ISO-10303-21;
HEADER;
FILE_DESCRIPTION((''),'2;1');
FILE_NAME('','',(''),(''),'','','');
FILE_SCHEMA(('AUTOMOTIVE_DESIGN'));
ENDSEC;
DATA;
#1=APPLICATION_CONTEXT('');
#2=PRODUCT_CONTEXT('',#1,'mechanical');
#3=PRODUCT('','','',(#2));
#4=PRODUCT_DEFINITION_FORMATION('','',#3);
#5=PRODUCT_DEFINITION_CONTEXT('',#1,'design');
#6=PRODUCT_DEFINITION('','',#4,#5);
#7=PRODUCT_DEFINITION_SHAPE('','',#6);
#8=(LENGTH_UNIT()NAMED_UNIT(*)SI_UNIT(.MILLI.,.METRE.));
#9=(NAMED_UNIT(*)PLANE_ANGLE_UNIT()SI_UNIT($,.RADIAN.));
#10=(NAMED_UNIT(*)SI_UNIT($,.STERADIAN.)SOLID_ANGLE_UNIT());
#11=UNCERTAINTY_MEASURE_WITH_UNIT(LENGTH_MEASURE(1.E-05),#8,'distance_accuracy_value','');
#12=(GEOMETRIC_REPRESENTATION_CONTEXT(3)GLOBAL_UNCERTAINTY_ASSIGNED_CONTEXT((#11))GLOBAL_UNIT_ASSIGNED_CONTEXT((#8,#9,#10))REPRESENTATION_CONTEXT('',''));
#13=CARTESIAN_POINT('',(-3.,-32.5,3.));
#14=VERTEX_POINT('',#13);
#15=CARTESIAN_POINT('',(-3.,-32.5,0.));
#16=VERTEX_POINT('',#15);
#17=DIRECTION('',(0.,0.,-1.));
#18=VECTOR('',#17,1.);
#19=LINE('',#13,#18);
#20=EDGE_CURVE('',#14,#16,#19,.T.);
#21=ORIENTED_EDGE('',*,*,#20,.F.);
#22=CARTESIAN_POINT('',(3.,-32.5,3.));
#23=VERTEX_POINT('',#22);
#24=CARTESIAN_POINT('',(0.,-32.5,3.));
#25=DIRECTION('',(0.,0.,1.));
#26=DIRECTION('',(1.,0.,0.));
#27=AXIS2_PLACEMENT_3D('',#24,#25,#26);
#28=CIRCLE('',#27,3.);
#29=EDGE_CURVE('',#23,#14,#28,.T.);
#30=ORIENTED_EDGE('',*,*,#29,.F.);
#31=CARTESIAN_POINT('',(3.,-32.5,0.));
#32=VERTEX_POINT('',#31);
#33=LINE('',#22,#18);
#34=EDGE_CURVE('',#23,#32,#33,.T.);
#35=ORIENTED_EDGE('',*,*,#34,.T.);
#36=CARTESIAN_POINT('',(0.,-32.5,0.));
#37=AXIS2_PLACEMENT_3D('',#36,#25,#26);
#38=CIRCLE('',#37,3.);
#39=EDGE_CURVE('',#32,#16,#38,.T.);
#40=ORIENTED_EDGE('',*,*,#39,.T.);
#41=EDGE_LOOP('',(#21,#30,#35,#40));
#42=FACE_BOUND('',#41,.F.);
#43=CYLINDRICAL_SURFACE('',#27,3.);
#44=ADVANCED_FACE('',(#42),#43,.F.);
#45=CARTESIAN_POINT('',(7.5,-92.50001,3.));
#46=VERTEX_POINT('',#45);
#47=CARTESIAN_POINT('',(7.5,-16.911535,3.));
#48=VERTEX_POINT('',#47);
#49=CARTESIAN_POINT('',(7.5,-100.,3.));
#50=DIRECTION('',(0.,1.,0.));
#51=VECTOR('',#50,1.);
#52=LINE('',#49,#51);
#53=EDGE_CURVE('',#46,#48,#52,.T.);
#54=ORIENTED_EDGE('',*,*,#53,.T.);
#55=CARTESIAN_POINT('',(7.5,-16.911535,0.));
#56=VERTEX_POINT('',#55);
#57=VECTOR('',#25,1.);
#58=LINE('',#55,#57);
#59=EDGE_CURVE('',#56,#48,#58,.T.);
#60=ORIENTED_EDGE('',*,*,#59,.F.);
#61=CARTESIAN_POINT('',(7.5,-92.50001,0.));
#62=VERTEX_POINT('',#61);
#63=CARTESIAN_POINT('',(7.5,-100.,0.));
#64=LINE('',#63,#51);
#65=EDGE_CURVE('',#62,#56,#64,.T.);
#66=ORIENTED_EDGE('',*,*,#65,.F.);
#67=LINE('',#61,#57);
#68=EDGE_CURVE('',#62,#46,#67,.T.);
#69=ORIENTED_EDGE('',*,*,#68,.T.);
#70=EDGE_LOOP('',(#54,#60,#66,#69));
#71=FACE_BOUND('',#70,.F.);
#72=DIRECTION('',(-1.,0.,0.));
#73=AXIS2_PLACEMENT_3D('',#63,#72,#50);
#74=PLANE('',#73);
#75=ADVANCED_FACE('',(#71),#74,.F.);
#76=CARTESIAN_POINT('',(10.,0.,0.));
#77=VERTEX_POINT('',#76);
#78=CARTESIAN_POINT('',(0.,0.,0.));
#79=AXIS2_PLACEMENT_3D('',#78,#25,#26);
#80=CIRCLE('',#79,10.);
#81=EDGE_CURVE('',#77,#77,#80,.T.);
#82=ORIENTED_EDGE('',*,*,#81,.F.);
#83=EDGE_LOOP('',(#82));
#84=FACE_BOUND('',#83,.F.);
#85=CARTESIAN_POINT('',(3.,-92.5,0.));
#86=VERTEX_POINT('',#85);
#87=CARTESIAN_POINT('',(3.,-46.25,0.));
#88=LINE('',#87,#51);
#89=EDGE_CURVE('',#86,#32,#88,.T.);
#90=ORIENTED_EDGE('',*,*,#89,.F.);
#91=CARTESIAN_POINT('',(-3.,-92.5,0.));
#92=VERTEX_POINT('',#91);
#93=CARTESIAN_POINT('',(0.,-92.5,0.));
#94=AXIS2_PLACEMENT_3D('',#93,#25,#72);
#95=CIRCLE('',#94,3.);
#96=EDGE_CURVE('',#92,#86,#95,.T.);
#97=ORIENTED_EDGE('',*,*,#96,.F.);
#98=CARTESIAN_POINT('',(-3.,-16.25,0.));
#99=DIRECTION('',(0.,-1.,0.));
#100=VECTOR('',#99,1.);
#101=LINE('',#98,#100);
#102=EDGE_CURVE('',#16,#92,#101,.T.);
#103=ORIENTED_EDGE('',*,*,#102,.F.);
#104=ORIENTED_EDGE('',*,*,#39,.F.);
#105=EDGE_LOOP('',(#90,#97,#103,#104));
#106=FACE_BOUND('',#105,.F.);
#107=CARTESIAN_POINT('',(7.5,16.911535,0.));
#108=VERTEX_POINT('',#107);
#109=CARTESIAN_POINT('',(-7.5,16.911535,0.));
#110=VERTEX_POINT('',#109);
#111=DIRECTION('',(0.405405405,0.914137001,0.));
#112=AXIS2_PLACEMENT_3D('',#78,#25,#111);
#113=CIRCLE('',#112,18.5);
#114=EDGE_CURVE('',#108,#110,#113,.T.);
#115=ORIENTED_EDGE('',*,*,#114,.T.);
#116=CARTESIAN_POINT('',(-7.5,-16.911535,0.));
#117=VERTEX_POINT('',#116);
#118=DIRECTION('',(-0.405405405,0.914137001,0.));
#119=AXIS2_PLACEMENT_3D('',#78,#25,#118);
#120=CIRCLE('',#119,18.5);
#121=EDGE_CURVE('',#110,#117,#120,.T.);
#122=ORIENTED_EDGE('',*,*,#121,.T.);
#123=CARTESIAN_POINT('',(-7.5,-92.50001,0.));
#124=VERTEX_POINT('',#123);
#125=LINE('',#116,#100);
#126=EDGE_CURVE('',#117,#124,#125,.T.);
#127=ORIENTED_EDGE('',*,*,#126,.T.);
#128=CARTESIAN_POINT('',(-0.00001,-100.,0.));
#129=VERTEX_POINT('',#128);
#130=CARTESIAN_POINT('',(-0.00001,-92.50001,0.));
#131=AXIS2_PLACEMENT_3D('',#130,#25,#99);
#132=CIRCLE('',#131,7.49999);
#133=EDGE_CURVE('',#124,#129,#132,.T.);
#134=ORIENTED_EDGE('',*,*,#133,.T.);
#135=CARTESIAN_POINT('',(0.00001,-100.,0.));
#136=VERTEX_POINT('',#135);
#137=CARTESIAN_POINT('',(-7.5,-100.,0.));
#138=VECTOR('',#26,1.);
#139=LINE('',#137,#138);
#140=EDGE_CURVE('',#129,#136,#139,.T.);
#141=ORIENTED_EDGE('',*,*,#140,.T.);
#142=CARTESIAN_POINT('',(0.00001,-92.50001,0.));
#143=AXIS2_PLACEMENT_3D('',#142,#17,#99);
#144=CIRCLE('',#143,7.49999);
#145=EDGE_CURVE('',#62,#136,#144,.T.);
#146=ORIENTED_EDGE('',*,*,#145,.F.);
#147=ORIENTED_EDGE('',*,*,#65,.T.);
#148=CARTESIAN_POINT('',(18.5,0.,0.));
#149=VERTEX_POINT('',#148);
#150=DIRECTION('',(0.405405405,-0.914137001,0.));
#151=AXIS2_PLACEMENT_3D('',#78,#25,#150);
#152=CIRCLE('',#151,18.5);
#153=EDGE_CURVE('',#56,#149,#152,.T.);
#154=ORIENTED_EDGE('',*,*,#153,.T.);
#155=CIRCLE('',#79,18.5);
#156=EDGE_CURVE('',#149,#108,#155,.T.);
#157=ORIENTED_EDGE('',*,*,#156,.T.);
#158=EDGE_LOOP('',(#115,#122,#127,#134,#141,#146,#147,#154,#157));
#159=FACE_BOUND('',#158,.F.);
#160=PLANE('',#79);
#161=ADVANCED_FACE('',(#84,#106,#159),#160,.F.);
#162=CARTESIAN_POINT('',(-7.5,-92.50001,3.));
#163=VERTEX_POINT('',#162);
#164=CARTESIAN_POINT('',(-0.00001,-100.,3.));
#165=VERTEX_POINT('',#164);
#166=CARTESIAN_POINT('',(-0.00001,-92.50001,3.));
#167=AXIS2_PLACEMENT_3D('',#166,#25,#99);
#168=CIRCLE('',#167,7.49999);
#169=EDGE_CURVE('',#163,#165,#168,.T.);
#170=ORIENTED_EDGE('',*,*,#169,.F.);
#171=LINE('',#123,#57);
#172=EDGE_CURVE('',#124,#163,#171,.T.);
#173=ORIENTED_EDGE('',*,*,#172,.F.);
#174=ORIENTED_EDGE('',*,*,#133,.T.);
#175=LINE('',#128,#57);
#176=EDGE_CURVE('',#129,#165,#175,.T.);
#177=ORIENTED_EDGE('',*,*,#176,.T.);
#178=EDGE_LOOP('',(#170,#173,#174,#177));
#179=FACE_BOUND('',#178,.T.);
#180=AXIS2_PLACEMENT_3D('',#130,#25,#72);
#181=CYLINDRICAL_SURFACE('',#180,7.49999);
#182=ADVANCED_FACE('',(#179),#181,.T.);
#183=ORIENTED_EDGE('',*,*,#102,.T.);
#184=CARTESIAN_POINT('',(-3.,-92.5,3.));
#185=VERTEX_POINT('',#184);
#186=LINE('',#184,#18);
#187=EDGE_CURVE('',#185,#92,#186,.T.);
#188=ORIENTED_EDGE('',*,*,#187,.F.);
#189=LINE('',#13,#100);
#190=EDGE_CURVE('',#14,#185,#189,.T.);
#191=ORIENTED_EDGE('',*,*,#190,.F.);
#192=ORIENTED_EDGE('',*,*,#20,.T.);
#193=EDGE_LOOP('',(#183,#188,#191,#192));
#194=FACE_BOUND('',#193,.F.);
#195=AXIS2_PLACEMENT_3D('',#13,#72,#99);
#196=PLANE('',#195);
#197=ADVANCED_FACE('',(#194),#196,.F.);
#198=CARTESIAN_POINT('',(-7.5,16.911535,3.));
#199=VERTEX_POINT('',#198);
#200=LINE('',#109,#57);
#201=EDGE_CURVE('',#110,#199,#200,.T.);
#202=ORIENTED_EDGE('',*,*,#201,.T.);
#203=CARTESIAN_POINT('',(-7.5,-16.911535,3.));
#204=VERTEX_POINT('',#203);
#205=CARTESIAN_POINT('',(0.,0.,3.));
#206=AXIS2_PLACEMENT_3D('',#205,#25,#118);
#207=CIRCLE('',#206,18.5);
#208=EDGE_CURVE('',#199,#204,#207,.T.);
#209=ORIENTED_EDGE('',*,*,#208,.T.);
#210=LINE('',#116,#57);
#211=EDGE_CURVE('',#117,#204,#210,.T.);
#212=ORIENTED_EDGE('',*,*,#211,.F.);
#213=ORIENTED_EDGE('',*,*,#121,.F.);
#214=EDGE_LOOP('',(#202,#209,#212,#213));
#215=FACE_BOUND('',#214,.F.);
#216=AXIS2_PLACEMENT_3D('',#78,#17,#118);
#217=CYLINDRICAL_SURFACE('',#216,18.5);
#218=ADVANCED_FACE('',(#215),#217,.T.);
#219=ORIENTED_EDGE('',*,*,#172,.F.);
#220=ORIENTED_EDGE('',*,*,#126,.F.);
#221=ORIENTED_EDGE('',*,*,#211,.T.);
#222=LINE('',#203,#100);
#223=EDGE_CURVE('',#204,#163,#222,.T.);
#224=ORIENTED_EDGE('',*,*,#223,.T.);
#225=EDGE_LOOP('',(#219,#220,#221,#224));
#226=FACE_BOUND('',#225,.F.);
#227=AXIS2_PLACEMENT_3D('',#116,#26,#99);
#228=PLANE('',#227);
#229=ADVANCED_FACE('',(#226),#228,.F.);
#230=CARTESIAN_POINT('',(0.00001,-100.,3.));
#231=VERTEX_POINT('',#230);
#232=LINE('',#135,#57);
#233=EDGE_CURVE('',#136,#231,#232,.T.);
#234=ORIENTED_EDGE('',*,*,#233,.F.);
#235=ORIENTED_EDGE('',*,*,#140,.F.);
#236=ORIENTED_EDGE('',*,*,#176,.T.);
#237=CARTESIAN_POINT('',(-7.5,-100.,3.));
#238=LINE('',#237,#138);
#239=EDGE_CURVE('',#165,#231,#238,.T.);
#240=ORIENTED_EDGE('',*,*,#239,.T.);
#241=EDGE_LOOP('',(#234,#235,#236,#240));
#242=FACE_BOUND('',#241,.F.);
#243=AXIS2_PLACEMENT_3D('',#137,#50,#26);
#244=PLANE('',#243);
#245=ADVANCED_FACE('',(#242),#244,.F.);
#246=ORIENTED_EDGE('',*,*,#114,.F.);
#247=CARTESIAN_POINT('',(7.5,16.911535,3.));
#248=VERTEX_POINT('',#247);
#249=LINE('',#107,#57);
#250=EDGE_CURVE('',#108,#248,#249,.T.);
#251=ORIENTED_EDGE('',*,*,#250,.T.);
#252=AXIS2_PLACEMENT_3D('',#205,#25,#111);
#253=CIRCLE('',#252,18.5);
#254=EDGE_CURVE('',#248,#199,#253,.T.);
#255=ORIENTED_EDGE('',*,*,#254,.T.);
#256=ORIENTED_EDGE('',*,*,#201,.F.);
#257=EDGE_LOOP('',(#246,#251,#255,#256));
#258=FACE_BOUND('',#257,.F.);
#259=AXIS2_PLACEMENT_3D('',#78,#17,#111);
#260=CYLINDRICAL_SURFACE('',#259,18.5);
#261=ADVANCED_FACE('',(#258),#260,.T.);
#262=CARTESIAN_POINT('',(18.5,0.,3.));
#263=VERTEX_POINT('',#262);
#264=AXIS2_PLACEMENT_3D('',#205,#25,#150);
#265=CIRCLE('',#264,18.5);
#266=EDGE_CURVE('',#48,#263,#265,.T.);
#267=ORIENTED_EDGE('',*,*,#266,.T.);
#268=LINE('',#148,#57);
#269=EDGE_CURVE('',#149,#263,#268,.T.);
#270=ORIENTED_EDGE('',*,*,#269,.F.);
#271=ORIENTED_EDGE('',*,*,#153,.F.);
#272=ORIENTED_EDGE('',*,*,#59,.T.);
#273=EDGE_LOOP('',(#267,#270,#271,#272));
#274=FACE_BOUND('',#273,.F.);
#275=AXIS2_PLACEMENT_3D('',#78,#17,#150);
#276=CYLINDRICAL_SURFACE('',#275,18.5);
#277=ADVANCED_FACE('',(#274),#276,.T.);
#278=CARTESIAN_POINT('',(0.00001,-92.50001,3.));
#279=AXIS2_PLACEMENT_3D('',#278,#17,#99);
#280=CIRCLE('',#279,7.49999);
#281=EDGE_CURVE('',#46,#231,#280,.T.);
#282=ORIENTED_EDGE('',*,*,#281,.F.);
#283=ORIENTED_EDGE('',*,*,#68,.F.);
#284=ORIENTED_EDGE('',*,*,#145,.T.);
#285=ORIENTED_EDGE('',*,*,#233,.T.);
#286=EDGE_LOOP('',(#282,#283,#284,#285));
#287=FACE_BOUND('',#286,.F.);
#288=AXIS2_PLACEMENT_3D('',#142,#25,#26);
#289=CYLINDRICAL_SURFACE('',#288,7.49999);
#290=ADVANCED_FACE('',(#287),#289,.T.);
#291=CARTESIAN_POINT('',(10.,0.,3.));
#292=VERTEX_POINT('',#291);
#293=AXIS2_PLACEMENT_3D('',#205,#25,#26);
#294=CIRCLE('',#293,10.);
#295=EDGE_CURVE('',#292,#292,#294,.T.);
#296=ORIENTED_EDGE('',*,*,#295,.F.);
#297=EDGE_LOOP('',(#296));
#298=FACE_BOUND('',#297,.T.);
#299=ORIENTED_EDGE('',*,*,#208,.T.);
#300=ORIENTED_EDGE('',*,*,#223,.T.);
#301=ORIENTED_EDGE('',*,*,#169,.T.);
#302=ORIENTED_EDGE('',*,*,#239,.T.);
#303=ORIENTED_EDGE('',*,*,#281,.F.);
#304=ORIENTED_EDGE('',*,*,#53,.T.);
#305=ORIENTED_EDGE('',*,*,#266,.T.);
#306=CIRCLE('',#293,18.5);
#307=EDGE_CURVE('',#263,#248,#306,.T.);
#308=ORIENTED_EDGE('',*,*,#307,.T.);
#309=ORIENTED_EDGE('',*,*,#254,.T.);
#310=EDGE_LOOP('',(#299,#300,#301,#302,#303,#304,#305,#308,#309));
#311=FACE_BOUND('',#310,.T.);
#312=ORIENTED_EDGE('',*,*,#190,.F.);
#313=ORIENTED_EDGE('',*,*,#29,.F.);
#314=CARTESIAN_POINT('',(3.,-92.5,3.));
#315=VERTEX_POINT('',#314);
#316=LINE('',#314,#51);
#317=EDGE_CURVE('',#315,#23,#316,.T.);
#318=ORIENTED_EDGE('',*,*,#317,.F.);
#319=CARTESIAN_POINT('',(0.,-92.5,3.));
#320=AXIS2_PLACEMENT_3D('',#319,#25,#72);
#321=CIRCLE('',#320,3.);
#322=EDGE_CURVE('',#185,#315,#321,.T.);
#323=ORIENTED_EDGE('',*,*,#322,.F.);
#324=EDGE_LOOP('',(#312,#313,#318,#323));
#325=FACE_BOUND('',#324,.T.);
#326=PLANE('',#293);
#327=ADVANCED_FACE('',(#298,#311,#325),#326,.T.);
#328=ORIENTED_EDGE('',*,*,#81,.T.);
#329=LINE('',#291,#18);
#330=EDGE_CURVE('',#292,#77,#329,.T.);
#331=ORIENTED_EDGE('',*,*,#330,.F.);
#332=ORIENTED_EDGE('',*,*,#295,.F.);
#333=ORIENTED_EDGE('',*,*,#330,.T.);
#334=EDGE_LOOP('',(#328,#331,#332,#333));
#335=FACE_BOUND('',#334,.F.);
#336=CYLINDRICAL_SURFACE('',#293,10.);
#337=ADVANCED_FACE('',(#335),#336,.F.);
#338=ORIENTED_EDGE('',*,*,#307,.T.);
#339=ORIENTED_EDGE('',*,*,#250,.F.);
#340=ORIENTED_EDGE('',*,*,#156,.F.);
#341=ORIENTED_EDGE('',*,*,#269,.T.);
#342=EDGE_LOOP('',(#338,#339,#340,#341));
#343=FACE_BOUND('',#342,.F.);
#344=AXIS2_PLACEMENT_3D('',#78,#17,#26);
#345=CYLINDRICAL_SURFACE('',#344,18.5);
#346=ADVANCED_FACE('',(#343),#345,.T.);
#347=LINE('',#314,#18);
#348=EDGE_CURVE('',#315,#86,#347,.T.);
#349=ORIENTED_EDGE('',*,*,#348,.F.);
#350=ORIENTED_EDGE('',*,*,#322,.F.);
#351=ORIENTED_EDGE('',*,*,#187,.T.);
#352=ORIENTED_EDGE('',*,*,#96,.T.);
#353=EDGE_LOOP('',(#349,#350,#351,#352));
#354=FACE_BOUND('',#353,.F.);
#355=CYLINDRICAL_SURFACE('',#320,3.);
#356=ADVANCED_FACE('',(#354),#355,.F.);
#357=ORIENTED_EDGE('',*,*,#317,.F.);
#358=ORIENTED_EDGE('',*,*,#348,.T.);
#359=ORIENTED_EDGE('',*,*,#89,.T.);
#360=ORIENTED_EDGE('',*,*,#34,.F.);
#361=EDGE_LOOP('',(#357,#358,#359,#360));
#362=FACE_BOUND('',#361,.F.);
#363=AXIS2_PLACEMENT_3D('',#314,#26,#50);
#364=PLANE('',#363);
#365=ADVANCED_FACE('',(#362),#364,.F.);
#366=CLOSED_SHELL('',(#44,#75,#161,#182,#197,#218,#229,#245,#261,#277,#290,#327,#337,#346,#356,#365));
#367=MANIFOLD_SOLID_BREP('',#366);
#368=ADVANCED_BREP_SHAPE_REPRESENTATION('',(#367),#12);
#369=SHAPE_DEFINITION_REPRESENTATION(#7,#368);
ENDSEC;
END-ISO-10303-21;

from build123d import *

# Parameters (mm, degrees)
F1_DEPTH = 3
F2_R     = 10
F3_DEPTH = 25
F4_R     = 7.49999
F6_DEPTH = 25


# Not quite as in the source:
# - a fillet or chamfer is up to 0.001 mm smaller than in the source, because OpenCascade refuses the exact size


with BuildPart() as f1:
    # F0 (on Top) → F1 (new body)
    with BuildSketch(Plane.XY):
        with BuildLine():
            Line((7.5, -16.9115345253), (7.5, 16.9115345253))
            ThreePointArc((7.5, 16.9115345253), (0, 18.5), (-7.5, 16.9115345253))
            Line((-7.5, 16.9115345253), (-7.5, -16.9115345253))
            ThreePointArc((-7.5, -16.9115345253), (0, -18.5), (7.5, -16.9115345253))
        make_face()
        with BuildLine():
            Line((-7.5, -16.9115345253), (-7.5, 16.9115345253))
            ThreePointArc((-7.5, 16.9115345253), (-18.5, 0), (-7.5, -16.9115345253))
        make_face()
        with BuildLine():
            ThreePointArc((7.5, -16.9115345253), (15.5080624193, -10.0871205009), (18.5, 0))
            ThreePointArc((18.5, 0), (15.5080624193, 10.0871205009), (7.5, 16.9115345253))
            Line((7.5, 16.9115345253), (7.5, -16.9115345253))
        make_face()
        with BuildLine():
            Line((7.5, -100), (7.5, -16.9115345253))
            ThreePointArc((7.5, -16.9115345253), (0, -18.5), (-7.5, -16.9115345253))
            Line((-7.5, -16.9115345253), (-7.5, -100))
            Line((-7.5, -100), (7.5, -100))
        make_face()
    extrude(amount=F1_DEPTH)

    # F2 (on face) → F3 (cut)
    with BuildSketch(Plane.XY.offset(3)):
        Circle(F2_R)
    extrude(amount=-F3_DEPTH, mode=Mode.SUBTRACT)

    # F4 (radius 7.5 in the source; OpenCascade refuses exactly that, so slightly less here)
    f4_edges = [f1.edges().sort_by_distance(p)[0] for p in [
        (7.5, -100, 1.5),
        (-7.5, -100, 1.5),
    ]]
    fillet(f4_edges, radius=F4_R)

    # F5 (on face) → F6 (cut)
    with BuildSketch(Plane.XY.offset(3)):
        with BuildLine():
            ThreePointArc((-3, -92.5), (0, -95.5), (3, -92.5))
            Line((3, -92.5), (3, -32.5))
            ThreePointArc((3, -32.5), (0, -29.5), (-3, -32.5))
            Line((-3, -32.5), (-3, -92.5))
        make_face()
    extrude(amount=-F6_DEPTH, mode=Mode.SUBTRACT)


solid = f1.part
